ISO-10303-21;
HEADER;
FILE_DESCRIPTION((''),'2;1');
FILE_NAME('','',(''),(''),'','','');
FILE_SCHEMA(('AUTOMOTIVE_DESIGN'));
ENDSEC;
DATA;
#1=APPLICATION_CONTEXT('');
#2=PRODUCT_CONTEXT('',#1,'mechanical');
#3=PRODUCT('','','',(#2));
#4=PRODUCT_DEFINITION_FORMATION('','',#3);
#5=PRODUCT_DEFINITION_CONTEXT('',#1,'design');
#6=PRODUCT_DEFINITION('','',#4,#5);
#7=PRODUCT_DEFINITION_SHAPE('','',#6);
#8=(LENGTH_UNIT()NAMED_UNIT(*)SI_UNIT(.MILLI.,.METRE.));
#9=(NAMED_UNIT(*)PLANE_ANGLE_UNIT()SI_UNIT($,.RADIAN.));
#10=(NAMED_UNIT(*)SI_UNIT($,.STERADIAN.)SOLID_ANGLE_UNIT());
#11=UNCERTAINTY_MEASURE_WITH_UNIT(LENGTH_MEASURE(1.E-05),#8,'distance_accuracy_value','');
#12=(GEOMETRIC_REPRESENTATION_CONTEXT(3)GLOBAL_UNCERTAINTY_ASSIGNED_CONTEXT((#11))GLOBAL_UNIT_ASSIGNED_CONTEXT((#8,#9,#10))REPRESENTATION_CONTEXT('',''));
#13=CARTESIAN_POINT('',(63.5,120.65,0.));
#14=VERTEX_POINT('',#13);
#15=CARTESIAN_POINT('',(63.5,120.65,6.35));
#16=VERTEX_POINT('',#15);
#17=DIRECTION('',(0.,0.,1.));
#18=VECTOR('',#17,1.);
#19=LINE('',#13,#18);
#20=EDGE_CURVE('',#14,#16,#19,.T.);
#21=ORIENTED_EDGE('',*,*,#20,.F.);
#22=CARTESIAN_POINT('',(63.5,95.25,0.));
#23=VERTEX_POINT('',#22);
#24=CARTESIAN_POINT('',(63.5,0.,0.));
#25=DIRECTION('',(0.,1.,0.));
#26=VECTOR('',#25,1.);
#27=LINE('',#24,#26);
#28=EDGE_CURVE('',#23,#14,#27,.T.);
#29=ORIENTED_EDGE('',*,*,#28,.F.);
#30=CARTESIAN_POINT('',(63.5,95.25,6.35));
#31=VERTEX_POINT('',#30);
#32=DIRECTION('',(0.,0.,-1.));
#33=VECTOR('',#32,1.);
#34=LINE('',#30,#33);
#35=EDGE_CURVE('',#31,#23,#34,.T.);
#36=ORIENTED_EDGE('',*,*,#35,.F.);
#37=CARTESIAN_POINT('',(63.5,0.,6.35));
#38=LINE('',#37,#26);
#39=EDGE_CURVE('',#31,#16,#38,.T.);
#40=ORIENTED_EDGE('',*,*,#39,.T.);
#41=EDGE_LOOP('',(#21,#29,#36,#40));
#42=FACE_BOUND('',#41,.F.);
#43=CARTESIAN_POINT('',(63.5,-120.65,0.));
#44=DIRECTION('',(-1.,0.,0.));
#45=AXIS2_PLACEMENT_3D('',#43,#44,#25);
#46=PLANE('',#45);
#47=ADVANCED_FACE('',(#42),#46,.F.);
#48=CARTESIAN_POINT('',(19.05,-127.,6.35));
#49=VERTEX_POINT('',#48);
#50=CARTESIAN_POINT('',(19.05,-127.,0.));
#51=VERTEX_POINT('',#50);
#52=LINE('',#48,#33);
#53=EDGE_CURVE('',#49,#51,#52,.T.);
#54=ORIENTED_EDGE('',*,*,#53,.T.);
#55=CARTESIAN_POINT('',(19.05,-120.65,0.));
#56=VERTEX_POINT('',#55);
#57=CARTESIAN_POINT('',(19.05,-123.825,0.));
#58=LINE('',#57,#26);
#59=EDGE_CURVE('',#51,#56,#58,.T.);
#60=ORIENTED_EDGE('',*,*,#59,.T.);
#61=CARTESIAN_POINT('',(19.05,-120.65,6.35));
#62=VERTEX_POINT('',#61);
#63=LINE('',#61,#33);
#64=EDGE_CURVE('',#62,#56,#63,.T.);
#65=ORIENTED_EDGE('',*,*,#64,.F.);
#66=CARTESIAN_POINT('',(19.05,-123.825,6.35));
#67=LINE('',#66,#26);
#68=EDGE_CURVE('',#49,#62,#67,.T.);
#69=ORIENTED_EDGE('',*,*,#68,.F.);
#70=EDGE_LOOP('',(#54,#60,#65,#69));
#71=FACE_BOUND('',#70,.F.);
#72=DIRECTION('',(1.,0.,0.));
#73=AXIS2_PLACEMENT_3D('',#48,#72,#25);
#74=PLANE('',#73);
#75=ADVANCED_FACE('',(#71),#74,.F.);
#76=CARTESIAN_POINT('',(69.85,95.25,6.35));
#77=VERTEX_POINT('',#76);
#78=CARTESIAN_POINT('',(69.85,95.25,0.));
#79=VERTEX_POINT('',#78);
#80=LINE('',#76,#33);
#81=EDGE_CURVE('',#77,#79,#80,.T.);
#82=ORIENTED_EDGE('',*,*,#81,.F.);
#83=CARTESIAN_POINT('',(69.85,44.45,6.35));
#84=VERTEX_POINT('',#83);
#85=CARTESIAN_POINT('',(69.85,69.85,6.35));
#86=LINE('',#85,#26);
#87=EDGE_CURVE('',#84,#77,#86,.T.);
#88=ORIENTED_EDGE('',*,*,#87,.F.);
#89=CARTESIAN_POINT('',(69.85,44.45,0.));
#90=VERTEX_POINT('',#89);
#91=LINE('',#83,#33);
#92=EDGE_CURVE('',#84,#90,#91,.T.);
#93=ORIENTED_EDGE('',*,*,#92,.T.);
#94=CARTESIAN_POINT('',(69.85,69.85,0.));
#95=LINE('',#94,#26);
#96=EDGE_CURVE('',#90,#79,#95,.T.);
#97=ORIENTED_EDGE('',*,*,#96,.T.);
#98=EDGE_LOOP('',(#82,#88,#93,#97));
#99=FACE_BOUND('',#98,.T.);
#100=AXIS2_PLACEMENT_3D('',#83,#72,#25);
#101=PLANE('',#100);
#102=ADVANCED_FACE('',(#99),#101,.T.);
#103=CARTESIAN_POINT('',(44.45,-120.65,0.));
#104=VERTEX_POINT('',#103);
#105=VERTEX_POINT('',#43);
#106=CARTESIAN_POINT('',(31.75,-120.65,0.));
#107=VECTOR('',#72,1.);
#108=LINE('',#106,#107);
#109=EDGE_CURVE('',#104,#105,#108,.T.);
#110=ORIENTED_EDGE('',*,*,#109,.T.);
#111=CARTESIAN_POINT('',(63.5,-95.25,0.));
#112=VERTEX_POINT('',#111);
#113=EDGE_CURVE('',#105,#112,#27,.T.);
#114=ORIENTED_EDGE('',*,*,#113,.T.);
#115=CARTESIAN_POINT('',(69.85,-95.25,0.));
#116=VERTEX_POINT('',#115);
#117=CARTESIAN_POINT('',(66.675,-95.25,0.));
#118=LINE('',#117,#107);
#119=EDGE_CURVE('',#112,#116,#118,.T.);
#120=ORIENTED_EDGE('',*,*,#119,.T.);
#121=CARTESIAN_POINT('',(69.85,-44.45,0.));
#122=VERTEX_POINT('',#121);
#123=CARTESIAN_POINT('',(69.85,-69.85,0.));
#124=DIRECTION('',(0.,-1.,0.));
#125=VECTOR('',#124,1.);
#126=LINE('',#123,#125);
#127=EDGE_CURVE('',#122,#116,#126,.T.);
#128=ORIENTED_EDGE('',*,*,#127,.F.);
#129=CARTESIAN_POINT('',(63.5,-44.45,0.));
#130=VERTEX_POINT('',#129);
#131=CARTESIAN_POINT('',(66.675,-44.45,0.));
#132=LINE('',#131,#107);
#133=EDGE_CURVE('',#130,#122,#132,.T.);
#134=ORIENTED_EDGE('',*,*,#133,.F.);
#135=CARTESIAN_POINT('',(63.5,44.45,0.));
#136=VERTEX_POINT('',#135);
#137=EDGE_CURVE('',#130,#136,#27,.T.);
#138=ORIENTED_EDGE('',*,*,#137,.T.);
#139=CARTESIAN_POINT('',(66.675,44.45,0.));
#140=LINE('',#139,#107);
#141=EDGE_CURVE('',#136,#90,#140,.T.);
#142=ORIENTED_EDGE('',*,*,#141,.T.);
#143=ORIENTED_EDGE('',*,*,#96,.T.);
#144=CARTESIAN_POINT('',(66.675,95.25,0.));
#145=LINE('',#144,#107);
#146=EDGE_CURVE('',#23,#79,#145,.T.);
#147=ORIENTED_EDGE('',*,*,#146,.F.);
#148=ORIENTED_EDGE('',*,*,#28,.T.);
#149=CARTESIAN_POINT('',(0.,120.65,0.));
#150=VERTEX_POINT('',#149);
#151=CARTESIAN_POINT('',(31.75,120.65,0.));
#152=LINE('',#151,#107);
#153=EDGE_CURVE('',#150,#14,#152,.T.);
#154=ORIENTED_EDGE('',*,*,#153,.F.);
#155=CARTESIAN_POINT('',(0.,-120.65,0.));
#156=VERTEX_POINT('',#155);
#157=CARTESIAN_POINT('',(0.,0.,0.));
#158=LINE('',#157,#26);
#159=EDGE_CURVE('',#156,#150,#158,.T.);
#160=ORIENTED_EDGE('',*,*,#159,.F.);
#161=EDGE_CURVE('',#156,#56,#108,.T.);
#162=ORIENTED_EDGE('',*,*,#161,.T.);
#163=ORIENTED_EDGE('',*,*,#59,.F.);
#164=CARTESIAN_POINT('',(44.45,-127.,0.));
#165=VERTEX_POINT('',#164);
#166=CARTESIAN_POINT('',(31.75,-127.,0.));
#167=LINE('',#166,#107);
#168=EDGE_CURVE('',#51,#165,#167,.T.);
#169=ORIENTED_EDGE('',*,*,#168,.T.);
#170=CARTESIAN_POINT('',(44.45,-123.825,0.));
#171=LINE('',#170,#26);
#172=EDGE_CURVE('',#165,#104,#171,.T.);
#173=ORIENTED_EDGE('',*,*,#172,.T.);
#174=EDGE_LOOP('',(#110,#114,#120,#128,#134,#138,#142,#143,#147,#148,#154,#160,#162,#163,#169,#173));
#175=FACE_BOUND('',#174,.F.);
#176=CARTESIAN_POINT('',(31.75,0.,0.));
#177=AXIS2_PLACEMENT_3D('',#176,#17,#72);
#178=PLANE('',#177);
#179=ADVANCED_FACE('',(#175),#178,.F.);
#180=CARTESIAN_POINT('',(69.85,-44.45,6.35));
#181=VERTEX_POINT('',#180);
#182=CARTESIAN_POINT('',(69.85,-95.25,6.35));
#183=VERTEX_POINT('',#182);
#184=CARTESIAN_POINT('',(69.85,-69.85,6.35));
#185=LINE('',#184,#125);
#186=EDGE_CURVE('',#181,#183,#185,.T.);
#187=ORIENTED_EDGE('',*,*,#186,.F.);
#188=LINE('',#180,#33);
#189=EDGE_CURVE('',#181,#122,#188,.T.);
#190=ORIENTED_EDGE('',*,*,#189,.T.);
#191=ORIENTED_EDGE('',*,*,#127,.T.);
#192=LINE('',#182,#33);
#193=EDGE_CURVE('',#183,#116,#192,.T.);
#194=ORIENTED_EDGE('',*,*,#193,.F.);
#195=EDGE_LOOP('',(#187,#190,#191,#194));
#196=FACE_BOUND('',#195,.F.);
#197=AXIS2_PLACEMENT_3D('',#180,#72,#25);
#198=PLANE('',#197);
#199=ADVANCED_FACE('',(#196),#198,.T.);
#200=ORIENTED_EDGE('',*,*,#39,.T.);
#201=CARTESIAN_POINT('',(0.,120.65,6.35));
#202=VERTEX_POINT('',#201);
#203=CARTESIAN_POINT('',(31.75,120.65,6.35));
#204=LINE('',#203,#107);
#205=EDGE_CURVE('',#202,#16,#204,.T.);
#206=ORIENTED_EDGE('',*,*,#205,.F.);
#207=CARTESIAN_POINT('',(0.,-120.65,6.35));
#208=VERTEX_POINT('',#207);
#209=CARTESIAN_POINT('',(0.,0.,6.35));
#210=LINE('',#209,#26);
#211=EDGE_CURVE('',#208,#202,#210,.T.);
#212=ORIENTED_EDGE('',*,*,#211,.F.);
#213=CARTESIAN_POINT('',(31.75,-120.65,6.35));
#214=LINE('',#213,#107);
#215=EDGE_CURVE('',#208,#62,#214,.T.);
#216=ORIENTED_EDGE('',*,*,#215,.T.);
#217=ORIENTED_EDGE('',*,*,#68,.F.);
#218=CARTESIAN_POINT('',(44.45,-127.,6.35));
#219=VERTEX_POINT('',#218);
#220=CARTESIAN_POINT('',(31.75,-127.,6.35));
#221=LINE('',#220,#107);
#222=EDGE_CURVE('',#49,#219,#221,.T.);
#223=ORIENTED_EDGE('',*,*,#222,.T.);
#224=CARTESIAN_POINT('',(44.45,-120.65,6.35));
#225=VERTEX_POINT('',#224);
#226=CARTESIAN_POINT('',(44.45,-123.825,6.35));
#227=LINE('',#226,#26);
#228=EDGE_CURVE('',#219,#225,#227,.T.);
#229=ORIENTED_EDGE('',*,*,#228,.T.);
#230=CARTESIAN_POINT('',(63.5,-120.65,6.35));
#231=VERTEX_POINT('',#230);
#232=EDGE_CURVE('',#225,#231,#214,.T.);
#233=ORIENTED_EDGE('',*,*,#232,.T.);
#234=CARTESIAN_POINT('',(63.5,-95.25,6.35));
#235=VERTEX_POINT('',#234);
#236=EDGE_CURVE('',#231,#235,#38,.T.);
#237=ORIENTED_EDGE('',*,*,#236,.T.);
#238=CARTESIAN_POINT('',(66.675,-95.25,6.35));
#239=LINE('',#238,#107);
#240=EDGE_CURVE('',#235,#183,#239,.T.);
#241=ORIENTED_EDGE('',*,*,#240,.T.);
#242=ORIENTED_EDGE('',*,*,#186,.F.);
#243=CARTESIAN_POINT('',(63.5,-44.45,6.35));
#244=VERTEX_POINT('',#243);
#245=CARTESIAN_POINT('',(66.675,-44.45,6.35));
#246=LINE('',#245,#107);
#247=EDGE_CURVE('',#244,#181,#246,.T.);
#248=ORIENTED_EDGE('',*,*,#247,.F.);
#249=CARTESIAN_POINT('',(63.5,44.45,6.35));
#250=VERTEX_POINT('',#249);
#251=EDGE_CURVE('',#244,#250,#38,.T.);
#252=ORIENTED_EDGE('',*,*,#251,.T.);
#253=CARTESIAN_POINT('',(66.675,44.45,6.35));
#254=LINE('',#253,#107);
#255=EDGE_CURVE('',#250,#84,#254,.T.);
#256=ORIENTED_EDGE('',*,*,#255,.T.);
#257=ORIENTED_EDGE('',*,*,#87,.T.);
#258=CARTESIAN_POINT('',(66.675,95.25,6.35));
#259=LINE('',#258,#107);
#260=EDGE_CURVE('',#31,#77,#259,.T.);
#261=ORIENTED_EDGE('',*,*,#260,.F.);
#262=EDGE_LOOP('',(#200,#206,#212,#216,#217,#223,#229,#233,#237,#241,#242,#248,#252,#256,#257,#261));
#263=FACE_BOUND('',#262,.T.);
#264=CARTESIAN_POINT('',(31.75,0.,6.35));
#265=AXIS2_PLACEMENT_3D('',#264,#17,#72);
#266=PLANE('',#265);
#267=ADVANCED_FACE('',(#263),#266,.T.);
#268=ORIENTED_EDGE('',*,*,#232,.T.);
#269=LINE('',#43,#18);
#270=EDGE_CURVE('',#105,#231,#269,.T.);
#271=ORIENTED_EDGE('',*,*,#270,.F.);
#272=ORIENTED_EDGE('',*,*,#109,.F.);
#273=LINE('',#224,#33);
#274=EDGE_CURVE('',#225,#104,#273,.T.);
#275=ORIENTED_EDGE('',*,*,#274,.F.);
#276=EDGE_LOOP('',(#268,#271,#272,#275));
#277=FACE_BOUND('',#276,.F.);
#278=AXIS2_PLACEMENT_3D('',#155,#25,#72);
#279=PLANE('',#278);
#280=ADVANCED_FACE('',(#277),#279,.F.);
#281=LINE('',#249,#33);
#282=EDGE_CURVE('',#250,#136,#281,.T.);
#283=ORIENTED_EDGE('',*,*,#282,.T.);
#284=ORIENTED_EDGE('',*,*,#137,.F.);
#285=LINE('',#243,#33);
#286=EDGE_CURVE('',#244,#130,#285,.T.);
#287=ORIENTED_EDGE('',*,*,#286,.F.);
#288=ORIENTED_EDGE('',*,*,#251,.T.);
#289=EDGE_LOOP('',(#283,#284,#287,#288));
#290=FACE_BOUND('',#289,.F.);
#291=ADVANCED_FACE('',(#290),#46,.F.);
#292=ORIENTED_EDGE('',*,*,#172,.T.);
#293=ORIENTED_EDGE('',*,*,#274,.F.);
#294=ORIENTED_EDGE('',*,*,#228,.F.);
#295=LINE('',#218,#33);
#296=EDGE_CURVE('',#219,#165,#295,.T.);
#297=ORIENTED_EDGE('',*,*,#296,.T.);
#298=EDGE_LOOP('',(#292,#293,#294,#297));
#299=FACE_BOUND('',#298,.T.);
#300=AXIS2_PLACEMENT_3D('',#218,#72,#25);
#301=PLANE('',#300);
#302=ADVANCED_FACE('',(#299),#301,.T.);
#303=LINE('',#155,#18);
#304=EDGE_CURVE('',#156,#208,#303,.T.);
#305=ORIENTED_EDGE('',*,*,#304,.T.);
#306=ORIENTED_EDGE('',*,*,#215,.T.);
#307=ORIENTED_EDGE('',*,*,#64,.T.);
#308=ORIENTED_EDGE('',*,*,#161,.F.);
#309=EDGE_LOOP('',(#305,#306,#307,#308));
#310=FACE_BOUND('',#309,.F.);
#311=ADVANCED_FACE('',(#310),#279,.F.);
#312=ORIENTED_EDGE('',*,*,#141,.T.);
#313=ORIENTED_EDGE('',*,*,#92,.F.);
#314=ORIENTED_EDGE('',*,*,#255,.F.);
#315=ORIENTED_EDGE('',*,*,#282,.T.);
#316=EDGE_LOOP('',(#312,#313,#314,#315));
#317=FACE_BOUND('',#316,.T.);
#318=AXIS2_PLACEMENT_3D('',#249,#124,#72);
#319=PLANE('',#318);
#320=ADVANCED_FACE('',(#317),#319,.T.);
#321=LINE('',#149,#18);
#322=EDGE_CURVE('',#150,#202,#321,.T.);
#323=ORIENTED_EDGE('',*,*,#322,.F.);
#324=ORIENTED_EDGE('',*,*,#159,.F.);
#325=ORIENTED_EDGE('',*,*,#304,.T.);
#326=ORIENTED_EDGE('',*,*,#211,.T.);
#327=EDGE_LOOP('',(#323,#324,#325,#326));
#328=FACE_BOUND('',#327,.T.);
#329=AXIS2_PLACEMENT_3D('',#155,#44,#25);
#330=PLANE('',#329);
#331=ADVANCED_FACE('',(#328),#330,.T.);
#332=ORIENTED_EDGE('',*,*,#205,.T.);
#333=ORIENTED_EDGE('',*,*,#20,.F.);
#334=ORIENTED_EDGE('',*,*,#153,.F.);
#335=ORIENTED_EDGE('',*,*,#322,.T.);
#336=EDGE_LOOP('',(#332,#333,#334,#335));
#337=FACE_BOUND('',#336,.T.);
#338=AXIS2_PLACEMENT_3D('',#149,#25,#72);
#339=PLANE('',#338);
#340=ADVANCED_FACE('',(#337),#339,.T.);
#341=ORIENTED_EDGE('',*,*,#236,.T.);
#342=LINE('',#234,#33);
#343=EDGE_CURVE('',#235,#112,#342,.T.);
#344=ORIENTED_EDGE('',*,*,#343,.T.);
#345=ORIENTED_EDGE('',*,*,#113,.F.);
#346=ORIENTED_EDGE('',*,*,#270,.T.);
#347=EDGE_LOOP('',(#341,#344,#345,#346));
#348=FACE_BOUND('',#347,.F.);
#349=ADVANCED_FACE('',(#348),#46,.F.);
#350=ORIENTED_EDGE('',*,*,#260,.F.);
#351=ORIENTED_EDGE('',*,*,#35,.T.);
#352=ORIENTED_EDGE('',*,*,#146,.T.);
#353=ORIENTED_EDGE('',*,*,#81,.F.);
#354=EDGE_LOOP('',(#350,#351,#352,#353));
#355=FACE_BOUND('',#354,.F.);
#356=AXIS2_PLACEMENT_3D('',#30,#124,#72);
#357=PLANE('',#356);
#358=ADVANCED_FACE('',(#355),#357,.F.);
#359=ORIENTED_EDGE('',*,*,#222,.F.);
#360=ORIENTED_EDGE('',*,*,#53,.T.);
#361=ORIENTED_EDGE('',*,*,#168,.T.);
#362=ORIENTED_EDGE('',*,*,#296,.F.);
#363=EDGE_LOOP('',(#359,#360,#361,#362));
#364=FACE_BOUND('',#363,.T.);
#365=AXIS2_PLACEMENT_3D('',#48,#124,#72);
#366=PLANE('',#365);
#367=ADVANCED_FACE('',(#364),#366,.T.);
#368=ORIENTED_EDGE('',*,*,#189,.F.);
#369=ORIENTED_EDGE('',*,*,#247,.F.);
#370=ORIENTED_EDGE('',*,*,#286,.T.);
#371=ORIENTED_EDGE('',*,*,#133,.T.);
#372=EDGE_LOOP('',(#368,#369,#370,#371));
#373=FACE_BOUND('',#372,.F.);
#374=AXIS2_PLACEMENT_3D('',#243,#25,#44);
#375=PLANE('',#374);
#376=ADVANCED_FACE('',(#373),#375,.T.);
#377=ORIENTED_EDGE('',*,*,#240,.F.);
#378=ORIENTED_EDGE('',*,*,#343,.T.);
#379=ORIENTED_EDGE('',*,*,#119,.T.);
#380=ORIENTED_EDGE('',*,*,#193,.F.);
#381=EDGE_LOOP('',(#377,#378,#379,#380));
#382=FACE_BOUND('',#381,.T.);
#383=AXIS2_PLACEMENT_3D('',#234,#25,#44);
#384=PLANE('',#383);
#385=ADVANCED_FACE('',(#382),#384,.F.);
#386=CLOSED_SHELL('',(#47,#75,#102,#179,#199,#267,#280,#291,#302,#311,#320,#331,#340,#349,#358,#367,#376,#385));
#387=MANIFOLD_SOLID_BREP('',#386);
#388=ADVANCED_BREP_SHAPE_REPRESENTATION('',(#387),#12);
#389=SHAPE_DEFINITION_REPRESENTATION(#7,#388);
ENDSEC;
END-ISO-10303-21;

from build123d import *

# Parameters (mm, degrees)
F0_W     = 63.5
F0_H     = 241.3
F1_DEPTH = 6.35
F2_W     = 6.35
F2_H     = 50.8
F3_DEPTH = 6.35
F4_W     = 25.4
F4_H     = 6.35
F5_DEPTH = 6.35


# Not quite as in the source:
# - a pattern or mirror of a feature is missing from the dataset's text; its kind, count and spacing are read off the source's solid


with BuildPart() as f1:
    # F0 (on Top) → F1 (new body)
    with BuildSketch(Plane.XY):
        with Locations((31.75, 0)):
            Rectangle(F0_W, F0_H)
    extrude(amount=F1_DEPTH)

    # F2 (on face) → F3 (join)
    with BuildSketch(Plane.XY.offset(6.35)):
        with Locations((66.675, 69.85)):
            Rectangle(F2_W, F2_H)
    f3 = extrude(amount=-F3_DEPTH)

    # F3_copies: F3 across plane
    add(f3.mirror(Plane(origin=(0, 0, 0), x_dir=(0, 0, -1), z_dir=(0, -1, 0))))

    # F4 (on face) → F5 (join)
    with BuildSketch(Plane.XY.offset(6.35)):
        with Locations((31.75, -123.825)):
            Rectangle(F4_W, F4_H)
    extrude(amount=-F5_DEPTH)


solid = f1.part
